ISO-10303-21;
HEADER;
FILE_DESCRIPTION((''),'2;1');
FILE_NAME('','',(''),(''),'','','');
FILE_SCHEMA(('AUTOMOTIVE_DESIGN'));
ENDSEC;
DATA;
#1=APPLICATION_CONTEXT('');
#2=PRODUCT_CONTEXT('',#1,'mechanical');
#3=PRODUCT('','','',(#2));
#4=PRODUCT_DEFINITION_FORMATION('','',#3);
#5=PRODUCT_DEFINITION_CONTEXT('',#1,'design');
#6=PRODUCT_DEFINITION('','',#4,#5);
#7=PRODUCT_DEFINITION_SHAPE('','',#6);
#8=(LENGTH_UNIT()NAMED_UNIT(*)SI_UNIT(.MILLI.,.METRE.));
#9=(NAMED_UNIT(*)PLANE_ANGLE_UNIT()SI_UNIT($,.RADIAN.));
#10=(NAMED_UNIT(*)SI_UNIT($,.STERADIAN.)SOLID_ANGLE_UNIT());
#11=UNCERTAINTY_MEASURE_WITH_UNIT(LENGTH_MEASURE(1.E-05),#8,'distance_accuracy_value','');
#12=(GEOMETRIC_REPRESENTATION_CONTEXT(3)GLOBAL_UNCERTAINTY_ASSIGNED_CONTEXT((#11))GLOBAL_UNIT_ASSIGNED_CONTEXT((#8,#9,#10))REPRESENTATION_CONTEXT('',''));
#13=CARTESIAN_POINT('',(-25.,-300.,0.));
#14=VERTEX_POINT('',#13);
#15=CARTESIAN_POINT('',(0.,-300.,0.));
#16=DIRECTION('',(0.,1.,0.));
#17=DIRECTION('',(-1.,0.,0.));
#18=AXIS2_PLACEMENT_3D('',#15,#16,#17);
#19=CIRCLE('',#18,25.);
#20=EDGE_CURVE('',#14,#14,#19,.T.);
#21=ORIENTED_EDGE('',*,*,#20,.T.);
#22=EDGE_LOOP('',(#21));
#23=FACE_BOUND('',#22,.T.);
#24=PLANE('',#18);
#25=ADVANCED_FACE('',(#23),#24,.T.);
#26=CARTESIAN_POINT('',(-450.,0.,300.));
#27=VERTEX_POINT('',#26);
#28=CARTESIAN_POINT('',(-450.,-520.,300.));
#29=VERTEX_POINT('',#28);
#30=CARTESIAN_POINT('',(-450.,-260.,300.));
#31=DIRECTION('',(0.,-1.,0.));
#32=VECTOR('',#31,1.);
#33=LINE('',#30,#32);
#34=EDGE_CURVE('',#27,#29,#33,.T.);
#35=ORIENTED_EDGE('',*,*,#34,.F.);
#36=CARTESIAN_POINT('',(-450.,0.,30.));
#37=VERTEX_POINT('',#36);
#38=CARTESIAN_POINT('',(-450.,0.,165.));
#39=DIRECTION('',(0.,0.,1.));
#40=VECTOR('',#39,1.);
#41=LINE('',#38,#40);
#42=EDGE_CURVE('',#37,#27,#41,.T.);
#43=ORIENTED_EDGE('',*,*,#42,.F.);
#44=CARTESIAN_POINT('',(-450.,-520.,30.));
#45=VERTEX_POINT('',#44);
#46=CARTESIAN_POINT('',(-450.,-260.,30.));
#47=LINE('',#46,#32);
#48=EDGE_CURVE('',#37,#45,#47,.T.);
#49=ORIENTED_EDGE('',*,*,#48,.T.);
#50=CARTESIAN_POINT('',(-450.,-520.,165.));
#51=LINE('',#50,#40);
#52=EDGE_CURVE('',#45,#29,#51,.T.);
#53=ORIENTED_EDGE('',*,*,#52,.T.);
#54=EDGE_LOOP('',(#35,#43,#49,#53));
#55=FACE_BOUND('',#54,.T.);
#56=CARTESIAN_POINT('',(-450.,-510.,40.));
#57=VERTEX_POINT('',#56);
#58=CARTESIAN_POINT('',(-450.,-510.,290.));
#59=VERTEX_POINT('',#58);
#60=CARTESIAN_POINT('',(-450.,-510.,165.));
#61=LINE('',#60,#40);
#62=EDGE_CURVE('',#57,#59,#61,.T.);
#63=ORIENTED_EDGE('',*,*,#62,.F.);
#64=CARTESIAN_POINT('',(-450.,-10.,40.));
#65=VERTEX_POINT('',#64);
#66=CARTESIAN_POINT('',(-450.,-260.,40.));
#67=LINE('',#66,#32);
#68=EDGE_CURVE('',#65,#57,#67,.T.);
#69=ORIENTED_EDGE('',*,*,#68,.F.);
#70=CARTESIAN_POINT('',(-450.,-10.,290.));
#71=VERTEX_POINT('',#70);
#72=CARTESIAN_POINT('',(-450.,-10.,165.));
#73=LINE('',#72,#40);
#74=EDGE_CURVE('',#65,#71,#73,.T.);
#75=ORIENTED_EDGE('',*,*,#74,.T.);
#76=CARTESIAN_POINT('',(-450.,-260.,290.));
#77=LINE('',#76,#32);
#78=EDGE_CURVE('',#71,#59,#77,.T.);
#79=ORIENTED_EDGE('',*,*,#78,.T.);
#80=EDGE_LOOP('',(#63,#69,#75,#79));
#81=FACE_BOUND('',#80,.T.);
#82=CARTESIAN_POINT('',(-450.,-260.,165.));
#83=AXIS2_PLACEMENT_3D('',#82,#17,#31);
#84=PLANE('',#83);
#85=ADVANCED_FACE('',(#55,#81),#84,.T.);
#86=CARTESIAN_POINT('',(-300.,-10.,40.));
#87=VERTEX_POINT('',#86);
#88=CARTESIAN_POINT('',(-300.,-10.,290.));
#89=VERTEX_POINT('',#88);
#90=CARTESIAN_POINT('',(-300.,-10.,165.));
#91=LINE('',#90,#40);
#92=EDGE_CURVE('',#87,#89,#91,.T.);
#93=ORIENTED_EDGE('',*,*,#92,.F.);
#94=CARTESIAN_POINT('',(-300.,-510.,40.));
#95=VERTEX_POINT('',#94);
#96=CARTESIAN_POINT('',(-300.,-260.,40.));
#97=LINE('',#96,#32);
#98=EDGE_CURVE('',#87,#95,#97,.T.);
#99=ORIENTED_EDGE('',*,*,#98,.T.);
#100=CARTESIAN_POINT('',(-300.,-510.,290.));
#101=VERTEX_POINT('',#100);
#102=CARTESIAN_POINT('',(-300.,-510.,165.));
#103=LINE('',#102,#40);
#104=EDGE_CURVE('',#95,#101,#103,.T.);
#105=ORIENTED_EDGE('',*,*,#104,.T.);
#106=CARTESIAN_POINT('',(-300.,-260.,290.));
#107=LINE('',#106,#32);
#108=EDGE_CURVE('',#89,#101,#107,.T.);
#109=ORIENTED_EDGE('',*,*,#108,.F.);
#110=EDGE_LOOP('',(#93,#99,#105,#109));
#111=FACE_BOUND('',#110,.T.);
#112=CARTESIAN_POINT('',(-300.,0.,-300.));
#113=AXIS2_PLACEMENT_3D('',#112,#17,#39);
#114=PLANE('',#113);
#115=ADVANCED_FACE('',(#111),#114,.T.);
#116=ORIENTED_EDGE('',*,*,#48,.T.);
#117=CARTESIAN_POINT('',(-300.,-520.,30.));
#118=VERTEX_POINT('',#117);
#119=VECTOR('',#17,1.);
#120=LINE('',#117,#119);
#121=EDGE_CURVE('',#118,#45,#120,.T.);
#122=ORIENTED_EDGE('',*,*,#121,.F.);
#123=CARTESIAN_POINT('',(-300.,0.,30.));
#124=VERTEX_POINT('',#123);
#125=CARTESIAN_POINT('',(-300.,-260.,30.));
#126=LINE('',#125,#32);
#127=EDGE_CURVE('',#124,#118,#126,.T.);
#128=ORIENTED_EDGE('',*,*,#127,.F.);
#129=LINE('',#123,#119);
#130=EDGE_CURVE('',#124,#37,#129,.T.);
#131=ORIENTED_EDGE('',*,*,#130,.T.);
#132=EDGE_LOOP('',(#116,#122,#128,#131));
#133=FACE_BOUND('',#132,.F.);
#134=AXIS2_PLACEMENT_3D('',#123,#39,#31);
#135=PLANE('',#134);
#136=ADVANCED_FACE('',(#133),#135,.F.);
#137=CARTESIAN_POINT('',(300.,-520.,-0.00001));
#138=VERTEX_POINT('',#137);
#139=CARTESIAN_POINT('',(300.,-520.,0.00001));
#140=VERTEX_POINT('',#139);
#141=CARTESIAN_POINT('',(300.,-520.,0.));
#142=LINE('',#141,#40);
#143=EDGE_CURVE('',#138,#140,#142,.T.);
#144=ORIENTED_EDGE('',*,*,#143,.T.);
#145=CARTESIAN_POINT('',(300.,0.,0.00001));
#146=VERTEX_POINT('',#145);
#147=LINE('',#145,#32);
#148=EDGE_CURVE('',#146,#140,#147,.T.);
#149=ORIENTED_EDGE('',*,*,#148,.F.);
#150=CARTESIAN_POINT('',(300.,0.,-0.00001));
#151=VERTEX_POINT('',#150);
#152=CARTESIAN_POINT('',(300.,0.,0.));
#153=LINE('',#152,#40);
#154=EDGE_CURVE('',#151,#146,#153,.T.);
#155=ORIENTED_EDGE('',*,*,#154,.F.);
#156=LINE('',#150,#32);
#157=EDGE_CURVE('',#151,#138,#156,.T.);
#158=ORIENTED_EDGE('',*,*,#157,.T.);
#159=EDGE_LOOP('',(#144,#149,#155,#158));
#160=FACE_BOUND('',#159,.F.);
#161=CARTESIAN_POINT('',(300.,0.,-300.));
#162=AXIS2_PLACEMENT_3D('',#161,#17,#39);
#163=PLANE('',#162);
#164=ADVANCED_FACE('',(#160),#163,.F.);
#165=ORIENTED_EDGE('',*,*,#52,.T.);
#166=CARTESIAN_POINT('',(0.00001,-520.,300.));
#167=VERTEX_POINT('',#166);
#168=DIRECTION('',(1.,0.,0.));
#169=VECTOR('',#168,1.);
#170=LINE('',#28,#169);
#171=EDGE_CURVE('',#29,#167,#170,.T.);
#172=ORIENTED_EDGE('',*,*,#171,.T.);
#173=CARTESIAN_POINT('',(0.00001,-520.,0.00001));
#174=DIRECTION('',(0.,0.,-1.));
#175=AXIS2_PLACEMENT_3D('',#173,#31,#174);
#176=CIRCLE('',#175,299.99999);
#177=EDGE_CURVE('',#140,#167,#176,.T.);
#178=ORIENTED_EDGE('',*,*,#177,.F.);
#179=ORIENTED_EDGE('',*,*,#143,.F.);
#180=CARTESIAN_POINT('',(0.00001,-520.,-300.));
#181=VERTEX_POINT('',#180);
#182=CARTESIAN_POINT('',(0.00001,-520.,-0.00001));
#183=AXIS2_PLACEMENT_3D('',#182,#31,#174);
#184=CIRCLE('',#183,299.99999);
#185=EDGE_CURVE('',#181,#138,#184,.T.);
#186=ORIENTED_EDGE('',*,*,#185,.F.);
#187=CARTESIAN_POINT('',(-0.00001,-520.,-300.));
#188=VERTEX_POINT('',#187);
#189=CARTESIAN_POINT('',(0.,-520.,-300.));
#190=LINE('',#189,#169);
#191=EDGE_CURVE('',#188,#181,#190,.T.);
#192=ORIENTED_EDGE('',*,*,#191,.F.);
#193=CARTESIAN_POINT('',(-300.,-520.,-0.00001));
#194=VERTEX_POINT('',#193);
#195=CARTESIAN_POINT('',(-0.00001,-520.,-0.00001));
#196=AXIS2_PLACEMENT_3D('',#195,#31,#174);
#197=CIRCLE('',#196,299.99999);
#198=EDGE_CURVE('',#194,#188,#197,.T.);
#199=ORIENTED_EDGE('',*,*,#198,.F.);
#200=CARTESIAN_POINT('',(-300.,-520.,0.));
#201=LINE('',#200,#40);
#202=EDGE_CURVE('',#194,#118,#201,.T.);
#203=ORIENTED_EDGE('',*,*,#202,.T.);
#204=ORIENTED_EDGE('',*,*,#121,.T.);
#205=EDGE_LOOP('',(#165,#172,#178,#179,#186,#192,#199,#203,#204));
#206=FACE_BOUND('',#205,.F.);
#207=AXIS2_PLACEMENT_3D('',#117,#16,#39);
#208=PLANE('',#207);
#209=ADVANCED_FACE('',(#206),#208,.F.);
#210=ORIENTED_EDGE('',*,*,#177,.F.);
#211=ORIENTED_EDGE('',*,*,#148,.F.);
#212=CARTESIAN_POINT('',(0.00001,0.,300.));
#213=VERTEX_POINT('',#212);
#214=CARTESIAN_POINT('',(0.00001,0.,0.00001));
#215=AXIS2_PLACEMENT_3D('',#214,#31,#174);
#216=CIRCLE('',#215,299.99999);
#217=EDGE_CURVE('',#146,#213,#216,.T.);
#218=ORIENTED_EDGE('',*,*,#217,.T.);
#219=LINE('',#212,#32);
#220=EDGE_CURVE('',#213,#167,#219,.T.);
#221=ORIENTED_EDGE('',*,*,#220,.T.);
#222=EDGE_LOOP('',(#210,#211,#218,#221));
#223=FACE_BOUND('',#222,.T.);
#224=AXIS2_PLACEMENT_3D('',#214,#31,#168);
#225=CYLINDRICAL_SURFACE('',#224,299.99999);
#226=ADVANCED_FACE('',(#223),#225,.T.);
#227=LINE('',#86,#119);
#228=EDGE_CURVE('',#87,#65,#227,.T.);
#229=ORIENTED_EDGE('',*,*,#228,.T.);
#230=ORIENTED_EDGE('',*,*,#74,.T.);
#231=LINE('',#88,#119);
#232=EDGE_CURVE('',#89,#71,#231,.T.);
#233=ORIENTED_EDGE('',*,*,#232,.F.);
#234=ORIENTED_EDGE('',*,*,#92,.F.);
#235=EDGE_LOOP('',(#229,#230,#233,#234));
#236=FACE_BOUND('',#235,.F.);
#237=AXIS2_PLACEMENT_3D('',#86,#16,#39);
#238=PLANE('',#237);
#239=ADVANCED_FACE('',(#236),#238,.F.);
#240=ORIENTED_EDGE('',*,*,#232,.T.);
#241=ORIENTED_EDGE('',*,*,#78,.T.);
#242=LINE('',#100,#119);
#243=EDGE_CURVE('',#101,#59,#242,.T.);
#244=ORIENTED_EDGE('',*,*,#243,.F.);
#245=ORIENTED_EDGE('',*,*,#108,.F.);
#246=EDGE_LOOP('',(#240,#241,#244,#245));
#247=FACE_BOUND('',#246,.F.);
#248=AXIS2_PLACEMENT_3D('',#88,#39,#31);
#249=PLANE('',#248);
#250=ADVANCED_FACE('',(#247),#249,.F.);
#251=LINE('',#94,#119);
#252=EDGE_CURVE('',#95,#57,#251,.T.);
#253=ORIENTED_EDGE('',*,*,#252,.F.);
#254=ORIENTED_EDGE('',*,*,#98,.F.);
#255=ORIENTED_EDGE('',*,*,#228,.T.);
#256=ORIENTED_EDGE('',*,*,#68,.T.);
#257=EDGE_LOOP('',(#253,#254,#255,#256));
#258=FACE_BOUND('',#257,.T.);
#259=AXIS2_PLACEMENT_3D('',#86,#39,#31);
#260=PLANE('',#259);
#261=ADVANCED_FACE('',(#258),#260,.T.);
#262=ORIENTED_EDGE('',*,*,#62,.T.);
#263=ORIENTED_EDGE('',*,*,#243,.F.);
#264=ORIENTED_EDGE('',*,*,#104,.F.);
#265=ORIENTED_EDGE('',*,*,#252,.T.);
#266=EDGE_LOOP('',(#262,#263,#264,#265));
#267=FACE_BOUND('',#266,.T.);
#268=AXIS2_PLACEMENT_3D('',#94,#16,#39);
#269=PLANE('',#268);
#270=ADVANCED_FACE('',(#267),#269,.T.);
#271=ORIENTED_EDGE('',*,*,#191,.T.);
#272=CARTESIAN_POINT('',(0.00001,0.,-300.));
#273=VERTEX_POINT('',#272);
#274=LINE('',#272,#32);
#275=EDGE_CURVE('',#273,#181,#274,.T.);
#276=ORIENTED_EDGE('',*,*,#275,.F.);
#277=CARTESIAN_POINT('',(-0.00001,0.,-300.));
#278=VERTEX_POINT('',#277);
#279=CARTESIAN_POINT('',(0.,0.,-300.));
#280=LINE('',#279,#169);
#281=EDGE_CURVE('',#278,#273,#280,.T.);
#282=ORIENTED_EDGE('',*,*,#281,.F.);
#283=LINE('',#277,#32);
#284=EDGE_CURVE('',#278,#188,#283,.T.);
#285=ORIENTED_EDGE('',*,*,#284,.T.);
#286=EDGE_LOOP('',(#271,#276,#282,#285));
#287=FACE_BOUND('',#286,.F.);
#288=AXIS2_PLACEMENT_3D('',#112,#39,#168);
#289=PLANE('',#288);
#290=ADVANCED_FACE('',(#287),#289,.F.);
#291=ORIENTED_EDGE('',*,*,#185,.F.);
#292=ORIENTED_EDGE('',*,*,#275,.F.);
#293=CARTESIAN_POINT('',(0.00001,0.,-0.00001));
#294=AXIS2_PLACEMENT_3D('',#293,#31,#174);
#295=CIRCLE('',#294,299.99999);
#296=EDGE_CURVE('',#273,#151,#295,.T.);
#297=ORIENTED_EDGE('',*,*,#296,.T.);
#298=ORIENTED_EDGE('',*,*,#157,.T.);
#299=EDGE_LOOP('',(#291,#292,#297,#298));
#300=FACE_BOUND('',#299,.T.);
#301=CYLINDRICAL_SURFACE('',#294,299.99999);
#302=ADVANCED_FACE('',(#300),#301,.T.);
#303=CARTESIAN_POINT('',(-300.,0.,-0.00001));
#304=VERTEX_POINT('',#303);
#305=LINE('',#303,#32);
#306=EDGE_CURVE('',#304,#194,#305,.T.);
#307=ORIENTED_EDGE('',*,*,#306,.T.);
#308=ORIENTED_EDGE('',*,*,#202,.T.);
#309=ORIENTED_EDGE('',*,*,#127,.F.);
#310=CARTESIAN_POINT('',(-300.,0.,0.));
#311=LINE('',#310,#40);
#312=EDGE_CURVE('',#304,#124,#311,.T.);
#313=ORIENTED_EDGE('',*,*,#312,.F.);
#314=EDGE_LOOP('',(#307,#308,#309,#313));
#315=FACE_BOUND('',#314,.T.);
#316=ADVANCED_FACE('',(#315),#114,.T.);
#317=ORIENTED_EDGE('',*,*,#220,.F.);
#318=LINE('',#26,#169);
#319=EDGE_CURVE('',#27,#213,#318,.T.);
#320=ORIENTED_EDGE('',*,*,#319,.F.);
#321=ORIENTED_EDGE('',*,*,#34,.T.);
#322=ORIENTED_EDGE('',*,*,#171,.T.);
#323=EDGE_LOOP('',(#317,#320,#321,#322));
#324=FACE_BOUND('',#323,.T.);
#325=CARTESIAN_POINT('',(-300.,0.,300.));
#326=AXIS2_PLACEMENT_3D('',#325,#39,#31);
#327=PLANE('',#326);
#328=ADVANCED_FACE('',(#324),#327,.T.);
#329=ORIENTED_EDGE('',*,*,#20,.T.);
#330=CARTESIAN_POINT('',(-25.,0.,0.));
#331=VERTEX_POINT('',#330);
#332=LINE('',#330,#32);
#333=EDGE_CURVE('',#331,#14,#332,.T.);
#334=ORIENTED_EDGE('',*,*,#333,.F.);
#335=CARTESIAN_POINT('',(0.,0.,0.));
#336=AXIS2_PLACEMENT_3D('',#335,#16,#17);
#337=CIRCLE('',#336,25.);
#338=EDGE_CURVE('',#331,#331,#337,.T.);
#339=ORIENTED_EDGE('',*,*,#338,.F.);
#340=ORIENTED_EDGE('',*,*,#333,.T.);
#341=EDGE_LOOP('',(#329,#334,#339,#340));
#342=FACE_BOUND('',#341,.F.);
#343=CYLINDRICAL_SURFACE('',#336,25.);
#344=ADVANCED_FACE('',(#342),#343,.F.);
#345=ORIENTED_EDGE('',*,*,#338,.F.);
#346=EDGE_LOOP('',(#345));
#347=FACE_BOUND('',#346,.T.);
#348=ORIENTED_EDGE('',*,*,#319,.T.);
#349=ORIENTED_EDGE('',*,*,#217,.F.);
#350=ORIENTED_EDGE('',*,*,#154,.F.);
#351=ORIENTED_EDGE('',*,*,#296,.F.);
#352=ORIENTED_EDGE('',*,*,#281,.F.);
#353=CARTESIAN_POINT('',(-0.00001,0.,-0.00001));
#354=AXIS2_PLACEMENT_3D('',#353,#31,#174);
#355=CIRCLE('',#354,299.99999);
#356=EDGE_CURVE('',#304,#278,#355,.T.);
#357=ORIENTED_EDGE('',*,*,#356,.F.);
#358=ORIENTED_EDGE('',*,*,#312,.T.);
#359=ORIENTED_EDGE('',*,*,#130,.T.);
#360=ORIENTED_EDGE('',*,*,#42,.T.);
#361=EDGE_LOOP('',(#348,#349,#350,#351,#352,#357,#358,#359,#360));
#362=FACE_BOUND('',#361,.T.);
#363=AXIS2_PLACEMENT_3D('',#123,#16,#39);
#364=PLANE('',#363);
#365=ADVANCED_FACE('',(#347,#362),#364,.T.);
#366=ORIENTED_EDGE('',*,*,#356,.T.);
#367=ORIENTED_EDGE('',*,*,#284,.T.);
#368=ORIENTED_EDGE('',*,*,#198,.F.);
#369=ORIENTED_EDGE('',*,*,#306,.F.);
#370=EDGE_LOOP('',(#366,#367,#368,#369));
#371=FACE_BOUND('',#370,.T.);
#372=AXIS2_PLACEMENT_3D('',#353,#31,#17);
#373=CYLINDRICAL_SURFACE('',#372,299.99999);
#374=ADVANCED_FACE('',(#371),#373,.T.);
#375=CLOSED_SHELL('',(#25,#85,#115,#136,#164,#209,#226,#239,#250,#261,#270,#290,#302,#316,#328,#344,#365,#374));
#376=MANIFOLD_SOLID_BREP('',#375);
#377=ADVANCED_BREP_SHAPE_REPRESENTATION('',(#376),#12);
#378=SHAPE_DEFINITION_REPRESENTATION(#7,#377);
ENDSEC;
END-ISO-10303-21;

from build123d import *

# Parameters (mm, degrees)
F0_W     = 600
F0_H     = 600
F1_DEPTH = 520
F2_R     = 299.99999
F3_W     = 520
F3_H     = 270
F3_W_2   = 500
F3_H_2   = 250
F4_DEPTH = 150
F5_R     = 25
F6_DEPTH = 300


# Not quite as in the source:
# - a fillet or chamfer is up to 0.001 mm smaller than in the source, because OpenCascade refuses the exact size


with BuildPart() as f1:
    # F0 (on Front) → F1 (new body)
    with BuildSketch(Plane.XZ):
        Rectangle(F0_W, F0_H)
    extrude(amount=F1_DEPTH)

    # F2 (radius 300 in the source; OpenCascade refuses exactly that, so slightly less here)
    f2_edges = [f1.edges().sort_by_distance(p)[0] for p in [
        (300, -260, 300),
        (300, -260, -300),
        (-300, -260, -300),
    ]]
    fillet(f2_edges, radius=F2_R)

    # F3 (on face) → F4 (join)
    with BuildSketch(Plane(origin=(-300, 0, 0), x_dir=(0, -1, 0), z_dir=(-1, 0, 0))):
        with Locations((260, 165)):
            Rectangle(F3_W, F3_H)
        with Locations((260, 165)):
            Rectangle(F3_W_2, F3_H_2, mode=Mode.SUBTRACT)
    extrude(amount=F4_DEPTH)

    # F5 (on face) → F6 (cut)
    with BuildSketch(Plane(origin=(0, 0, 0), x_dir=(-1, 0, 0), z_dir=(0, 1, 0))):
        Circle(F5_R)
    extrude(amount=-F6_DEPTH, mode=Mode.SUBTRACT)


solid = f1.part
